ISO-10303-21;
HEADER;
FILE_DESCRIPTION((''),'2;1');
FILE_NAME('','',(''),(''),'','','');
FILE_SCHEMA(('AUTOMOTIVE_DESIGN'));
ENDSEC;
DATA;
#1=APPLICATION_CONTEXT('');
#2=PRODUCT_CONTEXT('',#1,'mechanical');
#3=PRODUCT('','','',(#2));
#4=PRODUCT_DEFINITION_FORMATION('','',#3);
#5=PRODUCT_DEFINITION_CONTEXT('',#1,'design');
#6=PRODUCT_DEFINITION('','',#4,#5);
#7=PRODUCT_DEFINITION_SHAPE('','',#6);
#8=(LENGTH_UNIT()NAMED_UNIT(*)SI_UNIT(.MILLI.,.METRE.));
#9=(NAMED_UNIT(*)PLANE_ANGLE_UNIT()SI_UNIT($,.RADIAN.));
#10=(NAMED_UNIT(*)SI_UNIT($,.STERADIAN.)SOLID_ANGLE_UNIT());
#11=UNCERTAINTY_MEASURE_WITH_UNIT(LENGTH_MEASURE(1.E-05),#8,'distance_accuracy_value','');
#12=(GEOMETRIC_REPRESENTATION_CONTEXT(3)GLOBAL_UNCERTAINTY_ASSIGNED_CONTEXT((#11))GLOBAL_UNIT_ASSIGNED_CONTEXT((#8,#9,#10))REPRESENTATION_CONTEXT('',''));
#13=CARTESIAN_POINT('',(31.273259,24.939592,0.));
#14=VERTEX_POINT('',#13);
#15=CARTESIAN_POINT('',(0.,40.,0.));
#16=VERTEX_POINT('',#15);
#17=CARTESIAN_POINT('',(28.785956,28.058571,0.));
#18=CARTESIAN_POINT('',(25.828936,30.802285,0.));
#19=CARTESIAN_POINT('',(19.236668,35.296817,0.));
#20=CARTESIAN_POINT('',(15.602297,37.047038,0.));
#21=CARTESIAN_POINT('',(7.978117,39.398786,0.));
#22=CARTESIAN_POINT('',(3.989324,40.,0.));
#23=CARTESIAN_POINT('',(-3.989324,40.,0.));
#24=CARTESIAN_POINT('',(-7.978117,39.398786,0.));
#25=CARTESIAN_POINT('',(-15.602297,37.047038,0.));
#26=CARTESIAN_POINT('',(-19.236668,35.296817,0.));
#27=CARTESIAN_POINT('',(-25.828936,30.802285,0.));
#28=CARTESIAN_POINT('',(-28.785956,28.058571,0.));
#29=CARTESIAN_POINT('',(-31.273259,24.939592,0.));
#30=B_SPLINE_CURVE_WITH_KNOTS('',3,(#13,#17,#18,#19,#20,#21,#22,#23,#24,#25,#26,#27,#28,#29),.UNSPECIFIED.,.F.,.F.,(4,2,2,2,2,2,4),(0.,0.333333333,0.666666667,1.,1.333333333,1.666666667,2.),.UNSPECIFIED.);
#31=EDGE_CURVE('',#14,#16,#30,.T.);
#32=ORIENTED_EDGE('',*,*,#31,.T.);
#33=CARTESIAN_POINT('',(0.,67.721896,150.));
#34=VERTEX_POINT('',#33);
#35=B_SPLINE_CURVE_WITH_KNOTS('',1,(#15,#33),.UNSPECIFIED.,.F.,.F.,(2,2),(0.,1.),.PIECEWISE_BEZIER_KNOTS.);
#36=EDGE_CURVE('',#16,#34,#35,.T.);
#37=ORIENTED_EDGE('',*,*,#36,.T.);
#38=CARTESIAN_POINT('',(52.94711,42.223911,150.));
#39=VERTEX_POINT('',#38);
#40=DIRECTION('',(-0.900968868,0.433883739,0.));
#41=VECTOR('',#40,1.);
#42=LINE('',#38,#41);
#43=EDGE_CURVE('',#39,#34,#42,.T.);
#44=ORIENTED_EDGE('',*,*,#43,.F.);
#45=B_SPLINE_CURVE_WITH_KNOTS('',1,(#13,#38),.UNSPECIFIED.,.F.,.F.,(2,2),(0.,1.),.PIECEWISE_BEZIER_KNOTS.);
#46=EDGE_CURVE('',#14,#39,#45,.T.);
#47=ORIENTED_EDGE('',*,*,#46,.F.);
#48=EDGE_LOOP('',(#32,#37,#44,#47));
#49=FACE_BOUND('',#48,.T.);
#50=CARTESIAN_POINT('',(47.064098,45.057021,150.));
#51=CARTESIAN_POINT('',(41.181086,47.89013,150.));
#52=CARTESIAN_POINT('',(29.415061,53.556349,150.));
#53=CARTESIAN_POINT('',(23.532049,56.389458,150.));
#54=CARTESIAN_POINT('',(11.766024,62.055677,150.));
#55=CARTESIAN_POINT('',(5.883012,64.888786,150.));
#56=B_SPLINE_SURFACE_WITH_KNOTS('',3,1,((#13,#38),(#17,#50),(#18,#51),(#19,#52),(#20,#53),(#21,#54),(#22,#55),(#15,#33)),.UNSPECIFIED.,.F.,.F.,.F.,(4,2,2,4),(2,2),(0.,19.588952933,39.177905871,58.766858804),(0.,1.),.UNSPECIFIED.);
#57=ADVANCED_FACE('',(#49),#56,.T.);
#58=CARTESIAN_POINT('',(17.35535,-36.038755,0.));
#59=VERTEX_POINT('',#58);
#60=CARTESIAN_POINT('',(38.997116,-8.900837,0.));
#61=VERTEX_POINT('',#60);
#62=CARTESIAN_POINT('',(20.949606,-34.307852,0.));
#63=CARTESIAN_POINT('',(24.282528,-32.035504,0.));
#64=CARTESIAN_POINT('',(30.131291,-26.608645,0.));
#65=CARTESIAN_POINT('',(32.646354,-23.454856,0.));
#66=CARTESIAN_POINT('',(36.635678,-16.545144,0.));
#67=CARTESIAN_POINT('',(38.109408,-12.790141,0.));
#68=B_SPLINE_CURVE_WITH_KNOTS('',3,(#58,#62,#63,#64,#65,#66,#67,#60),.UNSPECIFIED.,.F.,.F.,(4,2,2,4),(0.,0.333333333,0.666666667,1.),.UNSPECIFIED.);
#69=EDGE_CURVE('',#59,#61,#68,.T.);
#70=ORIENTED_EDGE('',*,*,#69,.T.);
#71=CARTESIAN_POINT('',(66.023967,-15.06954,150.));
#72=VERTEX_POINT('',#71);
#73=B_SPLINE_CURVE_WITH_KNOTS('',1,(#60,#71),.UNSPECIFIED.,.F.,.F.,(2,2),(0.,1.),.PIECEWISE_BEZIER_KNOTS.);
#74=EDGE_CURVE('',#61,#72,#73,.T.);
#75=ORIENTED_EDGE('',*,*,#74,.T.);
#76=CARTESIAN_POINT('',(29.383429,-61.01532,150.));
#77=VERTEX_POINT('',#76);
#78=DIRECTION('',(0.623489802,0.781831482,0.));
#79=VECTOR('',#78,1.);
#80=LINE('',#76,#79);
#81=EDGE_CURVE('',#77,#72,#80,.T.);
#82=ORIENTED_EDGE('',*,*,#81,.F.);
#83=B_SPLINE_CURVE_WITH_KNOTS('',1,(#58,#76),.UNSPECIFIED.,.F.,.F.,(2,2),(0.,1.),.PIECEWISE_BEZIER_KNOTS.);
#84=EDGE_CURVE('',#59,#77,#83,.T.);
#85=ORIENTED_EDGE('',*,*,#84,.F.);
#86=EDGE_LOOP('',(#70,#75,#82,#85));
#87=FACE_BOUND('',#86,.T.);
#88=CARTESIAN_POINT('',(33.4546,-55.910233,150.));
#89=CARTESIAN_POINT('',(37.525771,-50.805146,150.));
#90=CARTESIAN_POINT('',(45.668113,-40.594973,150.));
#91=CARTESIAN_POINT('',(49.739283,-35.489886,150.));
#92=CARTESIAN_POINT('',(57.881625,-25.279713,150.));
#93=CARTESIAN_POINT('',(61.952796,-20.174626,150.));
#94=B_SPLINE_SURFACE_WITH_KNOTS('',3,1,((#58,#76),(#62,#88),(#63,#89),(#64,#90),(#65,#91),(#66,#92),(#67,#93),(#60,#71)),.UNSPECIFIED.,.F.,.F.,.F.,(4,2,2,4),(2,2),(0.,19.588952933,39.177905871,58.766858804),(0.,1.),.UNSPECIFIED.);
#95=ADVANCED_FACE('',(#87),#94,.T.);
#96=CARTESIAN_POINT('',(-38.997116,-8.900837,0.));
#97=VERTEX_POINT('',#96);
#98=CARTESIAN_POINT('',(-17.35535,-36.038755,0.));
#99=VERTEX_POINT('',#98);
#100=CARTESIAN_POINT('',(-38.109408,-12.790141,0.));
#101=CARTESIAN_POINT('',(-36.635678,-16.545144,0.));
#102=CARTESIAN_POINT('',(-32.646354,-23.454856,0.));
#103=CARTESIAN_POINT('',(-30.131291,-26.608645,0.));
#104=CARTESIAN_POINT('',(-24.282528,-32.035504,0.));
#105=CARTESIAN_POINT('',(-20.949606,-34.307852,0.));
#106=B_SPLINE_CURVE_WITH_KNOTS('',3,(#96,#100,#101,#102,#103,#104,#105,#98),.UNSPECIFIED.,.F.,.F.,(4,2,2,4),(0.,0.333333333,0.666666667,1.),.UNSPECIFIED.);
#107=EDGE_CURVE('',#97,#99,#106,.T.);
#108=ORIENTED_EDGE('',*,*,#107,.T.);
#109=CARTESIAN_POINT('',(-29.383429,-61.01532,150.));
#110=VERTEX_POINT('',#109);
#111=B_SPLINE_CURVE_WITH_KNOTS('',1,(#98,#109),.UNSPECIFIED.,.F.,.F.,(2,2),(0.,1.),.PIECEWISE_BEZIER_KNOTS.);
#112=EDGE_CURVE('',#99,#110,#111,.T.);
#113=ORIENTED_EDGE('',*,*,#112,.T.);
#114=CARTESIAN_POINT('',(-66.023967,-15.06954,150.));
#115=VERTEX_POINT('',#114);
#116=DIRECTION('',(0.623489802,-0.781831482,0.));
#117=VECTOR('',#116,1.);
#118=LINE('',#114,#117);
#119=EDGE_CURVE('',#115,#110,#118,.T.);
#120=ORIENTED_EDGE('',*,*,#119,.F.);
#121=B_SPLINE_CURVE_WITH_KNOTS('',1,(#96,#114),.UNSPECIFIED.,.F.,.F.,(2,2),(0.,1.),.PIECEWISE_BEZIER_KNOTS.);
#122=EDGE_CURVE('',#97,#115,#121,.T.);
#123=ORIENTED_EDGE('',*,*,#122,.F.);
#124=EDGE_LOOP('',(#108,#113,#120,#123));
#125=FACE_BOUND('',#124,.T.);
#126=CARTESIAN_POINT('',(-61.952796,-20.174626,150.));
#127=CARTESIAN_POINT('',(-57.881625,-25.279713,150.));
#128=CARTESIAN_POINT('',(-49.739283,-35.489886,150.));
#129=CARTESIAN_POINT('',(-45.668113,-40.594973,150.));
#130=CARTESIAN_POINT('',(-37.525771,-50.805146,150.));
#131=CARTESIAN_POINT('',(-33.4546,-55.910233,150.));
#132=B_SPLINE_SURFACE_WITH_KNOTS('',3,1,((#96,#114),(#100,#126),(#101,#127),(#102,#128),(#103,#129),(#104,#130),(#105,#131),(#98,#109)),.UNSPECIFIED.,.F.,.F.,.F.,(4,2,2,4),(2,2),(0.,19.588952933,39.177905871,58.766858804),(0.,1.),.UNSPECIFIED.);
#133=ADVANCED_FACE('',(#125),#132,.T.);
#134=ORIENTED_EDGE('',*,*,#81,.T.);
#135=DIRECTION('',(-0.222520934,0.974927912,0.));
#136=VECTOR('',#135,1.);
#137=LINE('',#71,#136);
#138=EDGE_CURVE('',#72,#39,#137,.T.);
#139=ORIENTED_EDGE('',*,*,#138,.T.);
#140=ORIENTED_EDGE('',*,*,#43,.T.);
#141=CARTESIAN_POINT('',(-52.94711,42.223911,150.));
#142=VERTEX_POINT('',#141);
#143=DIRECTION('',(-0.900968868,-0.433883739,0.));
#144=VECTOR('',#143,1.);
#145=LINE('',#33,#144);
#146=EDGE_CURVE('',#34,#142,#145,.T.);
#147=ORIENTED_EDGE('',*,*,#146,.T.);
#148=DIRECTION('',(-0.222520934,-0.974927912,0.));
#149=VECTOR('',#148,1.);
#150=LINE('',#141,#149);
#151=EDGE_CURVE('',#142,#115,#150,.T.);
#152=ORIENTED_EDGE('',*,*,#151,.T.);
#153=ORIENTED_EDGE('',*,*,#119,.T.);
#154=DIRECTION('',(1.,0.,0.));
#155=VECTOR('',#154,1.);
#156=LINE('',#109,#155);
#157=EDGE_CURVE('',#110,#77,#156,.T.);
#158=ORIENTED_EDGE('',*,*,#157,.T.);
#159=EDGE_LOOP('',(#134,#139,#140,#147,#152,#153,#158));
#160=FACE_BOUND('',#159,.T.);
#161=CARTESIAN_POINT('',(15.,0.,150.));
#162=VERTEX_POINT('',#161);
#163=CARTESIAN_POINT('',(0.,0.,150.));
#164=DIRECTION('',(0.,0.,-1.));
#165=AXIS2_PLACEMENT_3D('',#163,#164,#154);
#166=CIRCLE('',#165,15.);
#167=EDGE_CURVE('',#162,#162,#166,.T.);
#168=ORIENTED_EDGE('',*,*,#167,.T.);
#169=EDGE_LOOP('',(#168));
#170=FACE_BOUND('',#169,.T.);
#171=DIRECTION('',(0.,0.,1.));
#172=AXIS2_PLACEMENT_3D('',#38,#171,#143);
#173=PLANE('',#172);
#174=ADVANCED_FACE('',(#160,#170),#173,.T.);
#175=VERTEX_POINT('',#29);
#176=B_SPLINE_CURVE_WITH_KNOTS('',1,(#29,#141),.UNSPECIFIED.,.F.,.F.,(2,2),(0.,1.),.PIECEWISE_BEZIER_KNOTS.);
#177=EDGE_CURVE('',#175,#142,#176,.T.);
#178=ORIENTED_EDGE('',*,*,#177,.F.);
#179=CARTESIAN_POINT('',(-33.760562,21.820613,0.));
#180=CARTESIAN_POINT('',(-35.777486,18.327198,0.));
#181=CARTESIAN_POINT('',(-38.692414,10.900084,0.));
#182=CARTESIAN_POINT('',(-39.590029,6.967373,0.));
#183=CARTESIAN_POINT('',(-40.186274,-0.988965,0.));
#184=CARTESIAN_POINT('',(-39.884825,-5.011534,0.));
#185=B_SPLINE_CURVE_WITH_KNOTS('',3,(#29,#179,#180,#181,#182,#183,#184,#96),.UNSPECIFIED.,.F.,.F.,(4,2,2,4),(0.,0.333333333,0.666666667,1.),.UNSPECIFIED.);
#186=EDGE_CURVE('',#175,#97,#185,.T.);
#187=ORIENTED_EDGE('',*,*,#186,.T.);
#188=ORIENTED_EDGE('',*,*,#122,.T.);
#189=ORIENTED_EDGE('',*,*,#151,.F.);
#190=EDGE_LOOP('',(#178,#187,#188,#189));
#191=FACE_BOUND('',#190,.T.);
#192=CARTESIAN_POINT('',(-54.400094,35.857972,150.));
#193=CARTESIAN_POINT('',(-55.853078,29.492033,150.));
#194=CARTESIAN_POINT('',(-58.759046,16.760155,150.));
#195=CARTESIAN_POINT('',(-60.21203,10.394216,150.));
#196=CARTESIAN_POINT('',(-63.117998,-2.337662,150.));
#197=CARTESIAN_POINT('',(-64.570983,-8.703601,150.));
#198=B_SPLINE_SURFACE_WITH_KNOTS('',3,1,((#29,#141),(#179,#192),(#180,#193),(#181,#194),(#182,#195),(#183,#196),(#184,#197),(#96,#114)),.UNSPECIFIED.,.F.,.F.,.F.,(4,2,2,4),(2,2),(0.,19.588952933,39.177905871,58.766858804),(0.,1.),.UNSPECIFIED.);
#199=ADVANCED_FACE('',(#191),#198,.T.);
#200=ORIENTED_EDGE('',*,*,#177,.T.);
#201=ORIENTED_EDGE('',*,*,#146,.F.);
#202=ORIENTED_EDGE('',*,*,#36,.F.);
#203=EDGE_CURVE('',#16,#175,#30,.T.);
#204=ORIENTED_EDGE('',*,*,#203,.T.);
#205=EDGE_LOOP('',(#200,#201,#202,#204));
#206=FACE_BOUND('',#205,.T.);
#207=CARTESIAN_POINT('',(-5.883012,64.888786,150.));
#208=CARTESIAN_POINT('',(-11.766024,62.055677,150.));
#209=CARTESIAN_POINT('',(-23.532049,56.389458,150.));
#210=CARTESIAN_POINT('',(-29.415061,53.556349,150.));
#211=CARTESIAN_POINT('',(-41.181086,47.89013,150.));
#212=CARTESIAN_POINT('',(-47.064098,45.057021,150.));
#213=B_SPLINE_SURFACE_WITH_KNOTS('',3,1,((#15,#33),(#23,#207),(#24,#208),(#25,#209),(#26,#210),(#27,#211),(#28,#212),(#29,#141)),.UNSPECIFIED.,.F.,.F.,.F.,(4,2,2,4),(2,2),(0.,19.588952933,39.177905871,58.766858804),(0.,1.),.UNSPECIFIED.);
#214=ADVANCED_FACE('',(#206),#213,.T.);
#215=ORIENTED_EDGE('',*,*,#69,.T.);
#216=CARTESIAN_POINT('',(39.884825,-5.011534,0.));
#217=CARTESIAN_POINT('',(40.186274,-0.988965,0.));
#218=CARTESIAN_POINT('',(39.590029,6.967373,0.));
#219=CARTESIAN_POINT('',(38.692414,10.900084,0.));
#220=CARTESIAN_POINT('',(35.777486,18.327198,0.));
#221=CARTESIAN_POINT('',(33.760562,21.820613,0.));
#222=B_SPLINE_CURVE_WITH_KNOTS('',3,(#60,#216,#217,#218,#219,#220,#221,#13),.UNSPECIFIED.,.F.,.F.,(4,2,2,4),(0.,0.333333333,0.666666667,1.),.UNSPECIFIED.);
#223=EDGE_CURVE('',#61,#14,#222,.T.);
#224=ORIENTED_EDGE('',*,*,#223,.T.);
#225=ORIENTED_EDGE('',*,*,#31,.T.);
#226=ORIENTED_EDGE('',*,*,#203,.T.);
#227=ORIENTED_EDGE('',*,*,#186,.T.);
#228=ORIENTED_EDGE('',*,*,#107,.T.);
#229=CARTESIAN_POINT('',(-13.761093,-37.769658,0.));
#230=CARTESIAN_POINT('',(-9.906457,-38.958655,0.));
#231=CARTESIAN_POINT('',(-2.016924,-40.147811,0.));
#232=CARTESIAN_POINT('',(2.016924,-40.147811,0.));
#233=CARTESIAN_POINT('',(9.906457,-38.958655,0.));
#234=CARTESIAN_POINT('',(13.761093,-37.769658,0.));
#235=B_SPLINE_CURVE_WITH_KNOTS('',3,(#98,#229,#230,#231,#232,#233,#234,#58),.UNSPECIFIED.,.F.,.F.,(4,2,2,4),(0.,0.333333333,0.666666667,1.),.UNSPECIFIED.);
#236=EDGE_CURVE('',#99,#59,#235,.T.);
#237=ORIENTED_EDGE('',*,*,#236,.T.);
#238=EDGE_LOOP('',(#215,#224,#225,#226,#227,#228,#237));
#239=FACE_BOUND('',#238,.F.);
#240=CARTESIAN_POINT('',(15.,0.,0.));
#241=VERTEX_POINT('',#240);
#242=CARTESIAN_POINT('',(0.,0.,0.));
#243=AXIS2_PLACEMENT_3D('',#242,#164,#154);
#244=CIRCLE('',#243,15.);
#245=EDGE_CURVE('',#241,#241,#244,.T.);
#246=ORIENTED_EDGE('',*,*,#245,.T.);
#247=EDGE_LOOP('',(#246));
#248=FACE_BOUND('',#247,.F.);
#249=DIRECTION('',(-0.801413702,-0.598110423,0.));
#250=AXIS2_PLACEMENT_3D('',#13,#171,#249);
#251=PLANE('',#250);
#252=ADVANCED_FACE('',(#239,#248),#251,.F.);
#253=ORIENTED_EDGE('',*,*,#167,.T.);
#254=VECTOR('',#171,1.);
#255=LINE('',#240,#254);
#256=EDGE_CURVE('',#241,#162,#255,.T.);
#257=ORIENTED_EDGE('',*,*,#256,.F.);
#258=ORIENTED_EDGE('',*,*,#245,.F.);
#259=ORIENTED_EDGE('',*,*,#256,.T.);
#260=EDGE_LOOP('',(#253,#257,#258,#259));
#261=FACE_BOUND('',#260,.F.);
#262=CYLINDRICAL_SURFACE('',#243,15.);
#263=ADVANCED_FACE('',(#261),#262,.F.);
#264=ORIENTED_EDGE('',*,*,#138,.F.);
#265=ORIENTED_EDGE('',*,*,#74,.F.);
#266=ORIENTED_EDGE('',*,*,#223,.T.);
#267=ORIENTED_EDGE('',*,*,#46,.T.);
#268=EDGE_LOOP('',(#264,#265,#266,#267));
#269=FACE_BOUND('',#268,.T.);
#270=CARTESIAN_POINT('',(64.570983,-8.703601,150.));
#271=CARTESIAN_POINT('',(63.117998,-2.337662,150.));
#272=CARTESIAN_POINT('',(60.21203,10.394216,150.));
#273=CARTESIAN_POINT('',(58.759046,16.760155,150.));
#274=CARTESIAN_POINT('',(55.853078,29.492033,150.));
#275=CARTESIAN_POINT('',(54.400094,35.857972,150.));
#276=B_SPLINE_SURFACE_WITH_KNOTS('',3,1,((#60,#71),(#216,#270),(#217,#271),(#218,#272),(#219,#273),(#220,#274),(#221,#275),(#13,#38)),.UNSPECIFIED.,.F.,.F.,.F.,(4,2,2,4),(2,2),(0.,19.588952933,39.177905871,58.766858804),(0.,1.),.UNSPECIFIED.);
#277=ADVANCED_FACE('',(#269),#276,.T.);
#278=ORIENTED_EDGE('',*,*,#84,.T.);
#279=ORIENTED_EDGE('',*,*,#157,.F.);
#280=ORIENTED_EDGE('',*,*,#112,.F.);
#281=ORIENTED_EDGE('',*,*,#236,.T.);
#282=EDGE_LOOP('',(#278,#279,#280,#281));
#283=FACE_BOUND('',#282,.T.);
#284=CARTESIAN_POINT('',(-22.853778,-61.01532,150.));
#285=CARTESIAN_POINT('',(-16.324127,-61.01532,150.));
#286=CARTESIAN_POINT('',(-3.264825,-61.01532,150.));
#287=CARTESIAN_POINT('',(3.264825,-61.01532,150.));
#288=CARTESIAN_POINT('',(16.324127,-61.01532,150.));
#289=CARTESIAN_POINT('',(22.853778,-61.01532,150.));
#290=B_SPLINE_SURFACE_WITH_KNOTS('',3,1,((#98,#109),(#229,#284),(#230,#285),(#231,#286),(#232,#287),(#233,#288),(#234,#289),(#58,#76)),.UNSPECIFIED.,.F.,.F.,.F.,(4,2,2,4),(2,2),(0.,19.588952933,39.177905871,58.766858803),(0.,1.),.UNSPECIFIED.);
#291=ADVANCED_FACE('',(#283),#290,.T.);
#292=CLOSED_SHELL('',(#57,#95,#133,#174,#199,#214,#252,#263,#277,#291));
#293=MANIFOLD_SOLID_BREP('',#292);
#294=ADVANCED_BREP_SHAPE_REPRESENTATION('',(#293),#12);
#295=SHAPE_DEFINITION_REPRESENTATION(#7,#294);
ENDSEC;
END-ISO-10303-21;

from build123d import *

# Parameters (mm, degrees)
F4_R     = 15
F5_DEPTH = 172


# Not quite as in the source:
# - the arcs of a loft's sections are written as splines that run evenly, so that the points pair up as in the source's solid


with BuildPart() as f3:
    # F1 (on Top) → F3 section 0
    with BuildSketch(Plane.XY):
        with BuildLine():
            add(Edge.make_bspline(
                [(31.2732592987, 24.9395920743), (28.7859564656, 28.0585711749), (25.8289364984, 30.8022847428), (19.2366681467, 35.2968172025), (15.6022965087, 37.0470383387), (7.9781174442, 39.3987861242), (3.9893240046, 40), (0, 40)],
                knots=[0, 0, 0, 0, 0.3333333333, 0.3333333333, 0.6666666667, 0.6666666667, 1, 1, 1, 1], degree=3))
            add(Edge.make_bspline(
                [(0, 40), (-3.9893240046, 40), (-7.9781174442, 39.3987861242), (-15.6022965087, 37.0470383387), (-19.2366681467, 35.2968172025), (-25.8289364984, 30.8022847428), (-28.7859564656, 28.0585711749), (-31.2732592987, 24.9395920743)],
                knots=[0, 0, 0, 0, 0.3333333333, 0.3333333333, 0.6666666667, 0.6666666667, 1, 1, 1, 1], degree=3))
            add(Edge.make_bspline(
                [(-31.2732592987, 24.9395920743), (-33.7605621319, 21.8206129738), (-35.7774862274, 18.3271979653), (-38.6924136641, 10.900083984), (-39.590029331, 6.967372789), (-40.1862744435, -0.9889653021), (-39.8848245906, -5.0115340355), (-38.9971164873, -8.9008373583)],
                knots=[0, 0, 0, 0, 0.3333333333, 0.3333333333, 0.6666666667, 0.6666666667, 1, 1, 1, 1], degree=3))
            add(Edge.make_bspline(
                [(-38.9971164873, -8.9008373583), (-38.1094083839, -12.790140681), (-36.6356781537, -16.5451440681), (-32.6463541491, -23.4548559319), (-30.1312909397, -26.6086454432), (-24.282528082, -32.0355043032), (-20.9496062968, -34.3078519004), (-17.3553495647, -36.0387547161)],
                knots=[0, 0, 0, 0, 0.3333333333, 0.3333333333, 0.6666666667, 0.6666666667, 1, 1, 1, 1], degree=3))
            add(Edge.make_bspline(
                [(-17.3553495647, -36.0387547161), (-13.7610928326, -37.7696575317), (-9.9064571986, -38.9586551589), (-2.0169240955, -40.1478109392), (2.0169240955, -40.1478109392), (9.9064571986, -38.9586551589), (13.7610928326, -37.7696575317), (17.3553495647, -36.0387547161)],
                knots=[0, 0, 0, 0, 0.3333333333, 0.3333333333, 0.6666666667, 0.6666666667, 1, 1, 1, 1], degree=3))
            add(Edge.make_bspline(
                [(17.3553495647, -36.0387547161), (20.9496062968, -34.3078519004), (24.282528082, -32.0355043032), (30.1312909397, -26.6086454432), (32.6463541491, -23.4548559319), (36.6356781537, -16.5451440681), (38.1094083839, -12.790140681), (38.9971164873, -8.9008373583)],
                knots=[0, 0, 0, 0, 0.3333333333, 0.3333333333, 0.6666666667, 0.6666666667, 1, 1, 1, 1], degree=3))
            add(Edge.make_bspline(
                [(38.9971164873, -8.9008373583), (39.8848245906, -5.0115340355), (40.1862744435, -0.9889653021), (39.590029331, 6.967372789), (38.6924136641, 10.900083984), (35.7774862274, 18.3271979653), (33.7605621319, 21.8206129738), (31.2732592987, 24.9395920743)],
                knots=[0, 0, 0, 0, 0.3333333333, 0.3333333333, 0.6666666667, 0.6666666667, 1, 1, 1, 1], degree=3))
        make_face()
    # F2 (on offset) → F3 section 1
    with BuildSketch(Plane.XY.offset(150)):
        Polygon((52.9471102464, 42.2239114397), (0, 67.7218958735), (-52.9471102464, 42.2239114397), (-66.023966553, -15.0695395191), (-29.3834294017, -61.0153198574), (29.3834294017, -61.0153198574), (66.023966553, -15.0695395191), align=None)
    loft(ruled=True)

    # F4 (on face) → F5 (cut)
    with BuildSketch(Plane(origin=(0, 0, 0), x_dir=(1, 0, 0), z_dir=(0, 0, -1))):
        Circle(F4_R)
    extrude(amount=-F5_DEPTH, mode=Mode.SUBTRACT)


solid = f3.part
